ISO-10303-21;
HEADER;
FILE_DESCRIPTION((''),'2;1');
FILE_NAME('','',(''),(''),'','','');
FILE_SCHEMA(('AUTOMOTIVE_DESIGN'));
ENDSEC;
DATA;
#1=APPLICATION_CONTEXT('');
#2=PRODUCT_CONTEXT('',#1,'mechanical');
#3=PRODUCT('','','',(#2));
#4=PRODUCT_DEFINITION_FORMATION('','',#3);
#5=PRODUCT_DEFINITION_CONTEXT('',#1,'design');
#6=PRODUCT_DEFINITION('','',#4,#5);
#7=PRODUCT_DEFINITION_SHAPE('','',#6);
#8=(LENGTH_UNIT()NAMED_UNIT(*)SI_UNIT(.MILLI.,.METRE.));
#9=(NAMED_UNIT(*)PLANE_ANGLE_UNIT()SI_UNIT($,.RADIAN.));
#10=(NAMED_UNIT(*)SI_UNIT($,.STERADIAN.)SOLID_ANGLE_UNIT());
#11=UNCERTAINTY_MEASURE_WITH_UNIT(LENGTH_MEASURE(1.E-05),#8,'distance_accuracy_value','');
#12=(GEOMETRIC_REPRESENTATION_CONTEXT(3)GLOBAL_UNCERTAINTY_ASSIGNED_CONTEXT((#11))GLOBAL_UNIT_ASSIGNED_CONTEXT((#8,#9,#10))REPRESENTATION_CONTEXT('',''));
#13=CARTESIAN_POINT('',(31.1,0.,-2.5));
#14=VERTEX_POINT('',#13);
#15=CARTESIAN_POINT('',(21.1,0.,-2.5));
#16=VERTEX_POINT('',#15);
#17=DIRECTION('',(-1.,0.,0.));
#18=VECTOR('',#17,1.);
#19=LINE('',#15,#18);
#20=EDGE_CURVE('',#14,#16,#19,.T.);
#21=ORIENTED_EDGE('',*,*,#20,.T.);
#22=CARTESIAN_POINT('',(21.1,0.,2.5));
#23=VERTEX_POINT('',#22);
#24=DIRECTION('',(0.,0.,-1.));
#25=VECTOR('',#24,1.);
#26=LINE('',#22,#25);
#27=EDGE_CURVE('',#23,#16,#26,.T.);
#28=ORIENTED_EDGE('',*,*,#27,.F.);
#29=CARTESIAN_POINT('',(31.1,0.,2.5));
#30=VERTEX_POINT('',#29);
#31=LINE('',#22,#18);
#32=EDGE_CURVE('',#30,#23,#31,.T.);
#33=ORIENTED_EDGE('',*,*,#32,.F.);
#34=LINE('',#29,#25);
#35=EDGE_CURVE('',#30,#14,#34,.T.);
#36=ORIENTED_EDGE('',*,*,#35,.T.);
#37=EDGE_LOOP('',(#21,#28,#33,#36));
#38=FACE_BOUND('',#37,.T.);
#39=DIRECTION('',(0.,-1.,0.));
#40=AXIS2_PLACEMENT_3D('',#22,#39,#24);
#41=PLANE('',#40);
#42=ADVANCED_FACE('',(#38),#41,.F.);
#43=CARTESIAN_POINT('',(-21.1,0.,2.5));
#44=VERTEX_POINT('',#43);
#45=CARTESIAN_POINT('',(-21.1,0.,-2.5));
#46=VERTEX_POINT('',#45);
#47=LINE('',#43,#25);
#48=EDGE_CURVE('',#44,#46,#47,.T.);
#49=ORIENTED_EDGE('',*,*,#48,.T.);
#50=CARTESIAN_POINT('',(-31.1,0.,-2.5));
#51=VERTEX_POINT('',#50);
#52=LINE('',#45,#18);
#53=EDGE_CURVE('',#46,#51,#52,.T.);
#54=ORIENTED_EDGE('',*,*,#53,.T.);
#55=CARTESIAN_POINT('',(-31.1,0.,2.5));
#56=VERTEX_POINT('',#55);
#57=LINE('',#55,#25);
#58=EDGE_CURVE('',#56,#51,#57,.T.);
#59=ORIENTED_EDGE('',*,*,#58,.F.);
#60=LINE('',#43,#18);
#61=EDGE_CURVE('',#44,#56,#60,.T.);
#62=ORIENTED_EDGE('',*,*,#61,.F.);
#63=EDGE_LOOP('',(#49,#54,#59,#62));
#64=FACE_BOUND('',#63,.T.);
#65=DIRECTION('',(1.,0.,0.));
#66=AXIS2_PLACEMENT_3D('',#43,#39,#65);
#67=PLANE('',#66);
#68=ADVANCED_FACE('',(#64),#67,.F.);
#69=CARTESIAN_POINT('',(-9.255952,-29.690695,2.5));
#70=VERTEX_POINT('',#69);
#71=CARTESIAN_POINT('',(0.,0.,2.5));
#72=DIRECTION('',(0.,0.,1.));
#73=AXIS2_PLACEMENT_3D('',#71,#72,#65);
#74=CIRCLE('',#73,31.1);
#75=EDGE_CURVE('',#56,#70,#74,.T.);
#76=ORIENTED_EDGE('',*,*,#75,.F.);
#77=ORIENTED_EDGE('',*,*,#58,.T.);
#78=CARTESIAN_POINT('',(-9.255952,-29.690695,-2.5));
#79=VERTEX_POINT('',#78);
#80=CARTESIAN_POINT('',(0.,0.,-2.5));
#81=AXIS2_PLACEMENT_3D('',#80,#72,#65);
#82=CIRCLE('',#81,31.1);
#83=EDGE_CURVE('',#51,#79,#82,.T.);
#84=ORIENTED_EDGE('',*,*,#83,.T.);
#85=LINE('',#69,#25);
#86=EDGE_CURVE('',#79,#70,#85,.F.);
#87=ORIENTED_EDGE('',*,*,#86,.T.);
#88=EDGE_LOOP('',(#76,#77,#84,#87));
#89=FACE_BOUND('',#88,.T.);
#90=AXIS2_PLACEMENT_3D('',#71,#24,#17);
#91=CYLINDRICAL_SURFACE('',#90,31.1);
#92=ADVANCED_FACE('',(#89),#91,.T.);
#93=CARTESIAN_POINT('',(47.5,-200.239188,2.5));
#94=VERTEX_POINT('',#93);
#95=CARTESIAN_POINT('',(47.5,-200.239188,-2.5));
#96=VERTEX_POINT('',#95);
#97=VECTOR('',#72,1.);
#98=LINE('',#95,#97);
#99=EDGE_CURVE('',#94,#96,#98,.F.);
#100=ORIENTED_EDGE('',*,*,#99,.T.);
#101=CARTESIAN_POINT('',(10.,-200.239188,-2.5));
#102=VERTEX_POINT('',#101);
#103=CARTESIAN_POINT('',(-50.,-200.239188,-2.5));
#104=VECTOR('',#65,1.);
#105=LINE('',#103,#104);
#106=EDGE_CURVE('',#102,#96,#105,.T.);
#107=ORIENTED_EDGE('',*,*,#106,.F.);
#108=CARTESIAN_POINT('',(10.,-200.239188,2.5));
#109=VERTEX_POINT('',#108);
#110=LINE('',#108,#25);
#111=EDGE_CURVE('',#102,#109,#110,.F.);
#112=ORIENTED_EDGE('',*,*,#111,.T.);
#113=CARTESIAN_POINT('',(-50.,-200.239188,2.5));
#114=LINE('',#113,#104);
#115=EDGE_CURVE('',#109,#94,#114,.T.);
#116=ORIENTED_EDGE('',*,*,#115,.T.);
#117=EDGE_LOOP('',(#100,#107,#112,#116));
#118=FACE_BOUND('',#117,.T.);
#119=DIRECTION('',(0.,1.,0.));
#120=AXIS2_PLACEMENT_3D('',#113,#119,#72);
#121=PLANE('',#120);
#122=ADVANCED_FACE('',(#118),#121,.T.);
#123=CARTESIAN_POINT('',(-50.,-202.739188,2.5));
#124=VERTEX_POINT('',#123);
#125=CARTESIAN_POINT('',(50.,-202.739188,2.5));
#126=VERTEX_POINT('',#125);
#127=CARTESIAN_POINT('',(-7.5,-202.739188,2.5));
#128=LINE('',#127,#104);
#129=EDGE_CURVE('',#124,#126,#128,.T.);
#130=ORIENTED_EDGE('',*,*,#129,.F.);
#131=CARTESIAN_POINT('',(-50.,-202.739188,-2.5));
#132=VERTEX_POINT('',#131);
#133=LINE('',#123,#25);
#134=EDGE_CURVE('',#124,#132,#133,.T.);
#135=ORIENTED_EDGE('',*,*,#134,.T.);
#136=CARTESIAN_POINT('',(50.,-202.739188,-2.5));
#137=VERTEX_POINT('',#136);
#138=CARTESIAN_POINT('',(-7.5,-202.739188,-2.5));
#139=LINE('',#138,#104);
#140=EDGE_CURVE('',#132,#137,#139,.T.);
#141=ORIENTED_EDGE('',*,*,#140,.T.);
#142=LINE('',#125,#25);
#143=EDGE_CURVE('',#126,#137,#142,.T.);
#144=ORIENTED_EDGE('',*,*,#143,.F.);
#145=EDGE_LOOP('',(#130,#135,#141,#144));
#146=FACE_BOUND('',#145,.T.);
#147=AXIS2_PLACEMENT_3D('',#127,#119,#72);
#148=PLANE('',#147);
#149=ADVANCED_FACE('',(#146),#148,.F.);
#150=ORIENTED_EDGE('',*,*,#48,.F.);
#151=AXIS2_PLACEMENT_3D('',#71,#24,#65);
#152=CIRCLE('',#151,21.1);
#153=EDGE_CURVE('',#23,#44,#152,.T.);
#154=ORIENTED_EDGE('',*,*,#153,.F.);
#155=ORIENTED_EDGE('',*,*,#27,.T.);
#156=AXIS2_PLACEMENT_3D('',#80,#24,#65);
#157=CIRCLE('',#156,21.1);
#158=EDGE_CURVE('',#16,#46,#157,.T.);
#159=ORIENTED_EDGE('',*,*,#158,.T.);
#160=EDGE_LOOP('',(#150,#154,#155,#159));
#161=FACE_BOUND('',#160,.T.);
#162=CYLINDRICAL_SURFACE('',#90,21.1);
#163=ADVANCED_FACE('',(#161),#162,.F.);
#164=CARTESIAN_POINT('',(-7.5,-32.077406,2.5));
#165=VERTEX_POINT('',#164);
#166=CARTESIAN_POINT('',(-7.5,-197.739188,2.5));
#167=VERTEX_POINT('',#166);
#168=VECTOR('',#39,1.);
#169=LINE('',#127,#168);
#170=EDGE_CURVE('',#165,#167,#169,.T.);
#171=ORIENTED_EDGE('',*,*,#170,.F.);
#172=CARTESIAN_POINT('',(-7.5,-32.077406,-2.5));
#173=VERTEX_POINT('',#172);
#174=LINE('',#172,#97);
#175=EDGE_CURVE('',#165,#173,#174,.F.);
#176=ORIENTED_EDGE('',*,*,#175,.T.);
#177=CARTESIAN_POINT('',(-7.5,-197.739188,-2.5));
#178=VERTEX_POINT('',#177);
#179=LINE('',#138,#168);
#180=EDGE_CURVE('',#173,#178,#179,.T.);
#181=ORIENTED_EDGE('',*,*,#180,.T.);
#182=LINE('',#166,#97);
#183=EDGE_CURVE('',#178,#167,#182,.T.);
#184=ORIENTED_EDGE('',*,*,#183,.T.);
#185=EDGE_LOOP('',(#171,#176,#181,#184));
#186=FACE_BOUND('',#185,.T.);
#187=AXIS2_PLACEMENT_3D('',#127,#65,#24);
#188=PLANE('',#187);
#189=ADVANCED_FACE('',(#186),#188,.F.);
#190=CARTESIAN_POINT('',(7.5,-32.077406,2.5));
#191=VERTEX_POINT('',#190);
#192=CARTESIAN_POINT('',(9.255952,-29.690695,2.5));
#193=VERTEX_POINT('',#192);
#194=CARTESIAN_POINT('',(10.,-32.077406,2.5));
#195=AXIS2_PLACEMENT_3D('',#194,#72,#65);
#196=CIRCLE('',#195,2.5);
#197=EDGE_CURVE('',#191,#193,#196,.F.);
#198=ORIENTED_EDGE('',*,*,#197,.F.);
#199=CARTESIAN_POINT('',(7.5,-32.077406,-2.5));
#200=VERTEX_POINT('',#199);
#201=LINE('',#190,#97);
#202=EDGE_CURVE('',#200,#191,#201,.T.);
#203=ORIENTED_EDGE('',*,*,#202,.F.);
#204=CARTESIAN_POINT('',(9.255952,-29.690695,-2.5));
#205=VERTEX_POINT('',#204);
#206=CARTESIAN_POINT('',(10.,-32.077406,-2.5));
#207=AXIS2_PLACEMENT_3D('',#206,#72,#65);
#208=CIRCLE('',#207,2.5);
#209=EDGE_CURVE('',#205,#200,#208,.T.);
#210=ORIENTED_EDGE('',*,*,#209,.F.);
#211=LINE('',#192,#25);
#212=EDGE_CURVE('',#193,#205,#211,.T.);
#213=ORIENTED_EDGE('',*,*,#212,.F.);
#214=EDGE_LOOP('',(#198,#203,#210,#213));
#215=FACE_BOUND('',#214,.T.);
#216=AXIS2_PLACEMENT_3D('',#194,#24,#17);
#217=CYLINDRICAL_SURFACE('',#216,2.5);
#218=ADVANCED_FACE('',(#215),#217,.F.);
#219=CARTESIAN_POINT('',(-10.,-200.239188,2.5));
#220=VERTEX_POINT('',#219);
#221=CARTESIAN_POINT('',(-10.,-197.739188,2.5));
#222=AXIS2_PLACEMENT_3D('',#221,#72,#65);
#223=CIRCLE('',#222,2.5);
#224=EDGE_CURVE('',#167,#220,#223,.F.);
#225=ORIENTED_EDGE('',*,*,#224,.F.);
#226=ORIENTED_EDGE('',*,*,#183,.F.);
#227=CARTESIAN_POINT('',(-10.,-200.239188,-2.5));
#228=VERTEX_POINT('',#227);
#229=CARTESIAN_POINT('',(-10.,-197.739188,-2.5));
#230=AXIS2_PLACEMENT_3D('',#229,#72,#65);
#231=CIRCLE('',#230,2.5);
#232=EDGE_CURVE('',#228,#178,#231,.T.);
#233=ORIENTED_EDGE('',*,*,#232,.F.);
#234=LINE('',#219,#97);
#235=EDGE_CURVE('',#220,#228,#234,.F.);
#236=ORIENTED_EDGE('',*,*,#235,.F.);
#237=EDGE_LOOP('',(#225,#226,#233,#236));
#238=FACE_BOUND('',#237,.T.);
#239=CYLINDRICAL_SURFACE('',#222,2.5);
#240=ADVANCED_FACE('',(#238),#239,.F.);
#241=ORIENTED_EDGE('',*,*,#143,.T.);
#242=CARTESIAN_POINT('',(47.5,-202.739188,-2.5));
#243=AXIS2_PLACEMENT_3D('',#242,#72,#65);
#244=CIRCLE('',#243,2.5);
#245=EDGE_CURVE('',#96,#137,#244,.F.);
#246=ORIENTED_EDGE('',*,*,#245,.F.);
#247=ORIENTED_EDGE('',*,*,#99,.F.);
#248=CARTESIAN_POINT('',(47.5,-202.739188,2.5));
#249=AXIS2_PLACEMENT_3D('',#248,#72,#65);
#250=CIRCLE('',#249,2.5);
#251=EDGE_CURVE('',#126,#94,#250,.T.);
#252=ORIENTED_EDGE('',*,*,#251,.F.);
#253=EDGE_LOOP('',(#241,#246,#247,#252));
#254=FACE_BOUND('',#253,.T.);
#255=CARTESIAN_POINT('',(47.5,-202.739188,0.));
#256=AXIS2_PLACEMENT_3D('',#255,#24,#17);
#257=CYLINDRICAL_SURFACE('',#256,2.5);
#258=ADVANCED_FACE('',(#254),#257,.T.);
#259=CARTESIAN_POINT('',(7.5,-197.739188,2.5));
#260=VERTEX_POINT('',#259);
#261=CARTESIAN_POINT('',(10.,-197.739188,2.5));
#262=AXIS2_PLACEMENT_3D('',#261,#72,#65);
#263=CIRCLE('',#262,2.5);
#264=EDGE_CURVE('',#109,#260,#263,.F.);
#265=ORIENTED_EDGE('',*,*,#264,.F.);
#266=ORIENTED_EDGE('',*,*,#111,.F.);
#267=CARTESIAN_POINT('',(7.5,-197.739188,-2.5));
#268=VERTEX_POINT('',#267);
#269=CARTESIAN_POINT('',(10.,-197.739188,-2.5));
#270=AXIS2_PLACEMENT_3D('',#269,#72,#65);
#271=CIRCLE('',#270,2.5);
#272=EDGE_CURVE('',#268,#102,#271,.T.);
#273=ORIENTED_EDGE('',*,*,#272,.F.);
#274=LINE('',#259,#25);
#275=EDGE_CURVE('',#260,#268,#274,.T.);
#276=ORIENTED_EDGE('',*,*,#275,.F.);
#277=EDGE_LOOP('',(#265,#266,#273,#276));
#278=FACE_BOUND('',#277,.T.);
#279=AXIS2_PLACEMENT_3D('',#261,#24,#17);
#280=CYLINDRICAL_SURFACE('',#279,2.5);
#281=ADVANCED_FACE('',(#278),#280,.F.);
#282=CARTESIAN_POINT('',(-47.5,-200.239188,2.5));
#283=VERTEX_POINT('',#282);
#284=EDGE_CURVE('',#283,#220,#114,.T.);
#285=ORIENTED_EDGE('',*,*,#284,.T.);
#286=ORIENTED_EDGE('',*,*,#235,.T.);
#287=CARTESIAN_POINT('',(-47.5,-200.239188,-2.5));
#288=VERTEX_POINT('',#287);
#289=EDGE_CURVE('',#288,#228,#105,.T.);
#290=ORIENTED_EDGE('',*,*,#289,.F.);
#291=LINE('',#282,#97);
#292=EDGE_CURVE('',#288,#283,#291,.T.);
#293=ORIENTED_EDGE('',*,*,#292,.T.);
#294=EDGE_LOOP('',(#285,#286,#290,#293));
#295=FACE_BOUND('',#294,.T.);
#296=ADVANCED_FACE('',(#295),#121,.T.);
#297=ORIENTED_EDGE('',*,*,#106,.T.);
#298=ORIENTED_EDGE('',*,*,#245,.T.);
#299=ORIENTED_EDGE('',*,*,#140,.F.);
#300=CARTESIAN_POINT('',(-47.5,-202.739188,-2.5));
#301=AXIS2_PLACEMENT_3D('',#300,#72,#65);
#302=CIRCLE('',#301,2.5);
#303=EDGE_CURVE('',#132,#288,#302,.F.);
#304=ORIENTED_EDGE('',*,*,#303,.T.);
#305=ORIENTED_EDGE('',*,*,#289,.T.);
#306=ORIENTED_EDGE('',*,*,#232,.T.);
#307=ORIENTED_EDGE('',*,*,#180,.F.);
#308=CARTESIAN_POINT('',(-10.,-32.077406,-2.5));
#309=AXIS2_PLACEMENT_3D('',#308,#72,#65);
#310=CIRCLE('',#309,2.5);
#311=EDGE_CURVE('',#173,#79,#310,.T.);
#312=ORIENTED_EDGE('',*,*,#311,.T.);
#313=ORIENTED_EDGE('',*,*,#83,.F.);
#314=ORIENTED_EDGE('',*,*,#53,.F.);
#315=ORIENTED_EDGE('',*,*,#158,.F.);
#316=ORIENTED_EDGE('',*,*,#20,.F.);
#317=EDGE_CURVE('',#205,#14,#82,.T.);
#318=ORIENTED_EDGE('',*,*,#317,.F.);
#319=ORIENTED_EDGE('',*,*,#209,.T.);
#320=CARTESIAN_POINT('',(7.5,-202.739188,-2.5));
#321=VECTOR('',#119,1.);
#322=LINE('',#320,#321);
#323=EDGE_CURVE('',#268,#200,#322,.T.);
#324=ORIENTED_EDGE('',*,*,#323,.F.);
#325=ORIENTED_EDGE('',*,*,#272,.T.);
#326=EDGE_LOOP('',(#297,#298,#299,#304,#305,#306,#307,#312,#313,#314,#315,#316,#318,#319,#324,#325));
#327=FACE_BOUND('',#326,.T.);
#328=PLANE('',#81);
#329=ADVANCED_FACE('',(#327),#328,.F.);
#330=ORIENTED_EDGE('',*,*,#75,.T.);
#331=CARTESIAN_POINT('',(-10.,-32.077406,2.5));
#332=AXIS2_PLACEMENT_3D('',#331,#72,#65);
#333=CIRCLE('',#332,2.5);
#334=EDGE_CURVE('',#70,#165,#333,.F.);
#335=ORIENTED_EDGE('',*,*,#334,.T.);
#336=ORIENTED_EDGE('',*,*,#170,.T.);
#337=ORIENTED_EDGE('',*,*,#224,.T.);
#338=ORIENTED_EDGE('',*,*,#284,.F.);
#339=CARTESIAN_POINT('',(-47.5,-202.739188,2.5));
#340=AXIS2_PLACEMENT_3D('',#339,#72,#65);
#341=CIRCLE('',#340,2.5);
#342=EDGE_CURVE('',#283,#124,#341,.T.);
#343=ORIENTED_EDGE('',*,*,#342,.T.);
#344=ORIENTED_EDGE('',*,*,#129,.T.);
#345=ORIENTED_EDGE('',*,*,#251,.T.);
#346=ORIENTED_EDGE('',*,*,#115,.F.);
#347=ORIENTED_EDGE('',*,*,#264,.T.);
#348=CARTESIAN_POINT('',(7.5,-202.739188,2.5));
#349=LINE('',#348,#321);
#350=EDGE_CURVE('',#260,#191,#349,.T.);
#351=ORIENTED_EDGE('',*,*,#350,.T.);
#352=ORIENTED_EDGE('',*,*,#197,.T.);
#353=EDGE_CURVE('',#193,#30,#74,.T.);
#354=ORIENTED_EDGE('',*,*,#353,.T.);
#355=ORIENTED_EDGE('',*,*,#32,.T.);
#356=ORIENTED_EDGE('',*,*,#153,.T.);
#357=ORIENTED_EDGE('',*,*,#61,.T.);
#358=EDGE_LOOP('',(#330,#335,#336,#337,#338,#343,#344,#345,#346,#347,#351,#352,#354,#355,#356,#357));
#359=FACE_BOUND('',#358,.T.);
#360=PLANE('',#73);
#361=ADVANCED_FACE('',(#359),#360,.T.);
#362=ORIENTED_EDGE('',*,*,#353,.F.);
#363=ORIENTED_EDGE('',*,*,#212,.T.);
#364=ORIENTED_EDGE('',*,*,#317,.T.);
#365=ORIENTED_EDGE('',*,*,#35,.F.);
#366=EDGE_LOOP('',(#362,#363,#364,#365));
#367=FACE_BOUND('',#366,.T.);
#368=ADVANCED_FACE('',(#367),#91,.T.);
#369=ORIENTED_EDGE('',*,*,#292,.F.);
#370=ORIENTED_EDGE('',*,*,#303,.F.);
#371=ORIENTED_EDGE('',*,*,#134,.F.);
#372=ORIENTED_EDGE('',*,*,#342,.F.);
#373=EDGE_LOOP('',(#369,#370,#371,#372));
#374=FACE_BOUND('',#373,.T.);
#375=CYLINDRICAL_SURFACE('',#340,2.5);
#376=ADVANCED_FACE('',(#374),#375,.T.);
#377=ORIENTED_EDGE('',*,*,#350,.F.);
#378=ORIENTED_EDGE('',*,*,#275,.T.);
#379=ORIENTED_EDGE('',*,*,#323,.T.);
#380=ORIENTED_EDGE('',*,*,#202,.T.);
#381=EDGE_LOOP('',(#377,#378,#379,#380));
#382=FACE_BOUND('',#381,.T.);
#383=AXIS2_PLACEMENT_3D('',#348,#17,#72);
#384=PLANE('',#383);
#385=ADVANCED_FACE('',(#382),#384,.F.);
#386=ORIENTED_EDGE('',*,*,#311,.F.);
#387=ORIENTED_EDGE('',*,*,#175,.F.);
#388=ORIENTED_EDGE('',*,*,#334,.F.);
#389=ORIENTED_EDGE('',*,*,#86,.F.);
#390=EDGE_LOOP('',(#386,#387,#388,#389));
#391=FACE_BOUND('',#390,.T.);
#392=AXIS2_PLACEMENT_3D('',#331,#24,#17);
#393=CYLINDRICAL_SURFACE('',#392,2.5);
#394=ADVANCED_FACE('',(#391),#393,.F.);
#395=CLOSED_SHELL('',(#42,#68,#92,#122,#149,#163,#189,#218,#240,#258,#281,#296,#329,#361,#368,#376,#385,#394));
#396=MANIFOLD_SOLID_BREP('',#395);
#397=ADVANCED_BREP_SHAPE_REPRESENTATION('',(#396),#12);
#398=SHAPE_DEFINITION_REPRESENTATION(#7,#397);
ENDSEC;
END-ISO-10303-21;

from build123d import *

# Parameters (mm, degrees)
BOSS_EXTRUDE1_DEPTH      = 2.5
SKETCH3_W                = 15
SKETCH3_H                = 175
BOSS_EXTRUDE2_DEPTH      = 2.5
BOSS_EXTRUDE4_DEPTH      = 50
BOSS_EXTRUDE4_DEPTH_BACK = 50
SKETCH5_W                = 5
SKETCH5_H                = 2.5
FILLET1_R                = 2.5
FILLET2_R                = 2.5
FILLET3_R                = 2.5
FILLET4_R                = 2.5
FILLET5_R                = 2.5
FILLET6_R                = 2.5


with BuildPart() as part:
    # Sketch1 → Boss-Extrude1 (new, symmetric)
    with BuildSketch(Plane.XY):
        with BuildLine():
            Line((-21.1, 0), (-31.1, 0))
            ThreePointArc((-31.1, 0), (0, -31.1), (31.1, 0))
            Line((31.1, 0), (21.1, 0))
            ThreePointArc((21.1, 0), (0, -21.1), (-21.1, 0))
        make_face()
    extrude(amount=BOSS_EXTRUDE1_DEPTH, both=True)

    # Sketch3 → Boss-Extrude2 (add, symmetric)
    with BuildSketch(Plane.XY):
        with Locations((0, -115.239187588)):
            Rectangle(SKETCH3_W, SKETCH3_H)
    extrude(amount=BOSS_EXTRUDE2_DEPTH, both=True)

    # Sketch5 → Boss-Extrude4 (add, two sides: drawn at the far end of the back side and taken through both)
    with BuildSketch(Plane(origin=(0, 0, 0), x_dir=(0, 0, -1), z_dir=(1, 0, 0)).offset(-BOSS_EXTRUDE4_DEPTH_BACK)):
        with Locations((0, -201.489187588)):
            Rectangle(SKETCH5_W, SKETCH5_H)
    extrude(amount=BOSS_EXTRUDE4_DEPTH + BOSS_EXTRUDE4_DEPTH_BACK)

    # Fillet1
    fillet1_edges = [part.edges().sort_by_distance(p)[0] for p in [
        (7.5, -200.239187588, 0),
    ]]
    fillet(fillet1_edges, radius=FILLET1_R)

    # Fillet2
    fillet2_edges = [part.edges().sort_by_distance(p)[0] for p in [
        (-7.5, -200.239187588, 0),
    ]]
    fillet(fillet2_edges, radius=FILLET2_R)

    # Fillet3
    fillet3_edges = [part.edges().sort_by_distance(p)[0] for p in [
        (7.5, -30.182113909, 0),
    ]]
    fillet(fillet3_edges, radius=FILLET3_R)

    # Fillet4
    fillet4_edges = [part.edges().sort_by_distance(p)[0] for p in [
        (-7.5, -30.182113909, 0),
    ]]
    fillet(fillet4_edges, radius=FILLET4_R)

    # Fillet5
    fillet5_edges = [part.edges().sort_by_distance(p)[0] for p in [
        (50, -200.239187588, 0),
    ]]
    fillet(fillet5_edges, radius=FILLET5_R - 0.0001)  # a hair under: the kernel refuses the full size

    # Fillet6
    fillet6_edges = [part.edges().sort_by_distance(p)[0] for p in [
        (-50, -200.239187588, 0),
    ]]
    fillet(fillet6_edges, radius=FILLET6_R - 0.0001)  # a hair under: the kernel refuses the full size


solid = part.part
